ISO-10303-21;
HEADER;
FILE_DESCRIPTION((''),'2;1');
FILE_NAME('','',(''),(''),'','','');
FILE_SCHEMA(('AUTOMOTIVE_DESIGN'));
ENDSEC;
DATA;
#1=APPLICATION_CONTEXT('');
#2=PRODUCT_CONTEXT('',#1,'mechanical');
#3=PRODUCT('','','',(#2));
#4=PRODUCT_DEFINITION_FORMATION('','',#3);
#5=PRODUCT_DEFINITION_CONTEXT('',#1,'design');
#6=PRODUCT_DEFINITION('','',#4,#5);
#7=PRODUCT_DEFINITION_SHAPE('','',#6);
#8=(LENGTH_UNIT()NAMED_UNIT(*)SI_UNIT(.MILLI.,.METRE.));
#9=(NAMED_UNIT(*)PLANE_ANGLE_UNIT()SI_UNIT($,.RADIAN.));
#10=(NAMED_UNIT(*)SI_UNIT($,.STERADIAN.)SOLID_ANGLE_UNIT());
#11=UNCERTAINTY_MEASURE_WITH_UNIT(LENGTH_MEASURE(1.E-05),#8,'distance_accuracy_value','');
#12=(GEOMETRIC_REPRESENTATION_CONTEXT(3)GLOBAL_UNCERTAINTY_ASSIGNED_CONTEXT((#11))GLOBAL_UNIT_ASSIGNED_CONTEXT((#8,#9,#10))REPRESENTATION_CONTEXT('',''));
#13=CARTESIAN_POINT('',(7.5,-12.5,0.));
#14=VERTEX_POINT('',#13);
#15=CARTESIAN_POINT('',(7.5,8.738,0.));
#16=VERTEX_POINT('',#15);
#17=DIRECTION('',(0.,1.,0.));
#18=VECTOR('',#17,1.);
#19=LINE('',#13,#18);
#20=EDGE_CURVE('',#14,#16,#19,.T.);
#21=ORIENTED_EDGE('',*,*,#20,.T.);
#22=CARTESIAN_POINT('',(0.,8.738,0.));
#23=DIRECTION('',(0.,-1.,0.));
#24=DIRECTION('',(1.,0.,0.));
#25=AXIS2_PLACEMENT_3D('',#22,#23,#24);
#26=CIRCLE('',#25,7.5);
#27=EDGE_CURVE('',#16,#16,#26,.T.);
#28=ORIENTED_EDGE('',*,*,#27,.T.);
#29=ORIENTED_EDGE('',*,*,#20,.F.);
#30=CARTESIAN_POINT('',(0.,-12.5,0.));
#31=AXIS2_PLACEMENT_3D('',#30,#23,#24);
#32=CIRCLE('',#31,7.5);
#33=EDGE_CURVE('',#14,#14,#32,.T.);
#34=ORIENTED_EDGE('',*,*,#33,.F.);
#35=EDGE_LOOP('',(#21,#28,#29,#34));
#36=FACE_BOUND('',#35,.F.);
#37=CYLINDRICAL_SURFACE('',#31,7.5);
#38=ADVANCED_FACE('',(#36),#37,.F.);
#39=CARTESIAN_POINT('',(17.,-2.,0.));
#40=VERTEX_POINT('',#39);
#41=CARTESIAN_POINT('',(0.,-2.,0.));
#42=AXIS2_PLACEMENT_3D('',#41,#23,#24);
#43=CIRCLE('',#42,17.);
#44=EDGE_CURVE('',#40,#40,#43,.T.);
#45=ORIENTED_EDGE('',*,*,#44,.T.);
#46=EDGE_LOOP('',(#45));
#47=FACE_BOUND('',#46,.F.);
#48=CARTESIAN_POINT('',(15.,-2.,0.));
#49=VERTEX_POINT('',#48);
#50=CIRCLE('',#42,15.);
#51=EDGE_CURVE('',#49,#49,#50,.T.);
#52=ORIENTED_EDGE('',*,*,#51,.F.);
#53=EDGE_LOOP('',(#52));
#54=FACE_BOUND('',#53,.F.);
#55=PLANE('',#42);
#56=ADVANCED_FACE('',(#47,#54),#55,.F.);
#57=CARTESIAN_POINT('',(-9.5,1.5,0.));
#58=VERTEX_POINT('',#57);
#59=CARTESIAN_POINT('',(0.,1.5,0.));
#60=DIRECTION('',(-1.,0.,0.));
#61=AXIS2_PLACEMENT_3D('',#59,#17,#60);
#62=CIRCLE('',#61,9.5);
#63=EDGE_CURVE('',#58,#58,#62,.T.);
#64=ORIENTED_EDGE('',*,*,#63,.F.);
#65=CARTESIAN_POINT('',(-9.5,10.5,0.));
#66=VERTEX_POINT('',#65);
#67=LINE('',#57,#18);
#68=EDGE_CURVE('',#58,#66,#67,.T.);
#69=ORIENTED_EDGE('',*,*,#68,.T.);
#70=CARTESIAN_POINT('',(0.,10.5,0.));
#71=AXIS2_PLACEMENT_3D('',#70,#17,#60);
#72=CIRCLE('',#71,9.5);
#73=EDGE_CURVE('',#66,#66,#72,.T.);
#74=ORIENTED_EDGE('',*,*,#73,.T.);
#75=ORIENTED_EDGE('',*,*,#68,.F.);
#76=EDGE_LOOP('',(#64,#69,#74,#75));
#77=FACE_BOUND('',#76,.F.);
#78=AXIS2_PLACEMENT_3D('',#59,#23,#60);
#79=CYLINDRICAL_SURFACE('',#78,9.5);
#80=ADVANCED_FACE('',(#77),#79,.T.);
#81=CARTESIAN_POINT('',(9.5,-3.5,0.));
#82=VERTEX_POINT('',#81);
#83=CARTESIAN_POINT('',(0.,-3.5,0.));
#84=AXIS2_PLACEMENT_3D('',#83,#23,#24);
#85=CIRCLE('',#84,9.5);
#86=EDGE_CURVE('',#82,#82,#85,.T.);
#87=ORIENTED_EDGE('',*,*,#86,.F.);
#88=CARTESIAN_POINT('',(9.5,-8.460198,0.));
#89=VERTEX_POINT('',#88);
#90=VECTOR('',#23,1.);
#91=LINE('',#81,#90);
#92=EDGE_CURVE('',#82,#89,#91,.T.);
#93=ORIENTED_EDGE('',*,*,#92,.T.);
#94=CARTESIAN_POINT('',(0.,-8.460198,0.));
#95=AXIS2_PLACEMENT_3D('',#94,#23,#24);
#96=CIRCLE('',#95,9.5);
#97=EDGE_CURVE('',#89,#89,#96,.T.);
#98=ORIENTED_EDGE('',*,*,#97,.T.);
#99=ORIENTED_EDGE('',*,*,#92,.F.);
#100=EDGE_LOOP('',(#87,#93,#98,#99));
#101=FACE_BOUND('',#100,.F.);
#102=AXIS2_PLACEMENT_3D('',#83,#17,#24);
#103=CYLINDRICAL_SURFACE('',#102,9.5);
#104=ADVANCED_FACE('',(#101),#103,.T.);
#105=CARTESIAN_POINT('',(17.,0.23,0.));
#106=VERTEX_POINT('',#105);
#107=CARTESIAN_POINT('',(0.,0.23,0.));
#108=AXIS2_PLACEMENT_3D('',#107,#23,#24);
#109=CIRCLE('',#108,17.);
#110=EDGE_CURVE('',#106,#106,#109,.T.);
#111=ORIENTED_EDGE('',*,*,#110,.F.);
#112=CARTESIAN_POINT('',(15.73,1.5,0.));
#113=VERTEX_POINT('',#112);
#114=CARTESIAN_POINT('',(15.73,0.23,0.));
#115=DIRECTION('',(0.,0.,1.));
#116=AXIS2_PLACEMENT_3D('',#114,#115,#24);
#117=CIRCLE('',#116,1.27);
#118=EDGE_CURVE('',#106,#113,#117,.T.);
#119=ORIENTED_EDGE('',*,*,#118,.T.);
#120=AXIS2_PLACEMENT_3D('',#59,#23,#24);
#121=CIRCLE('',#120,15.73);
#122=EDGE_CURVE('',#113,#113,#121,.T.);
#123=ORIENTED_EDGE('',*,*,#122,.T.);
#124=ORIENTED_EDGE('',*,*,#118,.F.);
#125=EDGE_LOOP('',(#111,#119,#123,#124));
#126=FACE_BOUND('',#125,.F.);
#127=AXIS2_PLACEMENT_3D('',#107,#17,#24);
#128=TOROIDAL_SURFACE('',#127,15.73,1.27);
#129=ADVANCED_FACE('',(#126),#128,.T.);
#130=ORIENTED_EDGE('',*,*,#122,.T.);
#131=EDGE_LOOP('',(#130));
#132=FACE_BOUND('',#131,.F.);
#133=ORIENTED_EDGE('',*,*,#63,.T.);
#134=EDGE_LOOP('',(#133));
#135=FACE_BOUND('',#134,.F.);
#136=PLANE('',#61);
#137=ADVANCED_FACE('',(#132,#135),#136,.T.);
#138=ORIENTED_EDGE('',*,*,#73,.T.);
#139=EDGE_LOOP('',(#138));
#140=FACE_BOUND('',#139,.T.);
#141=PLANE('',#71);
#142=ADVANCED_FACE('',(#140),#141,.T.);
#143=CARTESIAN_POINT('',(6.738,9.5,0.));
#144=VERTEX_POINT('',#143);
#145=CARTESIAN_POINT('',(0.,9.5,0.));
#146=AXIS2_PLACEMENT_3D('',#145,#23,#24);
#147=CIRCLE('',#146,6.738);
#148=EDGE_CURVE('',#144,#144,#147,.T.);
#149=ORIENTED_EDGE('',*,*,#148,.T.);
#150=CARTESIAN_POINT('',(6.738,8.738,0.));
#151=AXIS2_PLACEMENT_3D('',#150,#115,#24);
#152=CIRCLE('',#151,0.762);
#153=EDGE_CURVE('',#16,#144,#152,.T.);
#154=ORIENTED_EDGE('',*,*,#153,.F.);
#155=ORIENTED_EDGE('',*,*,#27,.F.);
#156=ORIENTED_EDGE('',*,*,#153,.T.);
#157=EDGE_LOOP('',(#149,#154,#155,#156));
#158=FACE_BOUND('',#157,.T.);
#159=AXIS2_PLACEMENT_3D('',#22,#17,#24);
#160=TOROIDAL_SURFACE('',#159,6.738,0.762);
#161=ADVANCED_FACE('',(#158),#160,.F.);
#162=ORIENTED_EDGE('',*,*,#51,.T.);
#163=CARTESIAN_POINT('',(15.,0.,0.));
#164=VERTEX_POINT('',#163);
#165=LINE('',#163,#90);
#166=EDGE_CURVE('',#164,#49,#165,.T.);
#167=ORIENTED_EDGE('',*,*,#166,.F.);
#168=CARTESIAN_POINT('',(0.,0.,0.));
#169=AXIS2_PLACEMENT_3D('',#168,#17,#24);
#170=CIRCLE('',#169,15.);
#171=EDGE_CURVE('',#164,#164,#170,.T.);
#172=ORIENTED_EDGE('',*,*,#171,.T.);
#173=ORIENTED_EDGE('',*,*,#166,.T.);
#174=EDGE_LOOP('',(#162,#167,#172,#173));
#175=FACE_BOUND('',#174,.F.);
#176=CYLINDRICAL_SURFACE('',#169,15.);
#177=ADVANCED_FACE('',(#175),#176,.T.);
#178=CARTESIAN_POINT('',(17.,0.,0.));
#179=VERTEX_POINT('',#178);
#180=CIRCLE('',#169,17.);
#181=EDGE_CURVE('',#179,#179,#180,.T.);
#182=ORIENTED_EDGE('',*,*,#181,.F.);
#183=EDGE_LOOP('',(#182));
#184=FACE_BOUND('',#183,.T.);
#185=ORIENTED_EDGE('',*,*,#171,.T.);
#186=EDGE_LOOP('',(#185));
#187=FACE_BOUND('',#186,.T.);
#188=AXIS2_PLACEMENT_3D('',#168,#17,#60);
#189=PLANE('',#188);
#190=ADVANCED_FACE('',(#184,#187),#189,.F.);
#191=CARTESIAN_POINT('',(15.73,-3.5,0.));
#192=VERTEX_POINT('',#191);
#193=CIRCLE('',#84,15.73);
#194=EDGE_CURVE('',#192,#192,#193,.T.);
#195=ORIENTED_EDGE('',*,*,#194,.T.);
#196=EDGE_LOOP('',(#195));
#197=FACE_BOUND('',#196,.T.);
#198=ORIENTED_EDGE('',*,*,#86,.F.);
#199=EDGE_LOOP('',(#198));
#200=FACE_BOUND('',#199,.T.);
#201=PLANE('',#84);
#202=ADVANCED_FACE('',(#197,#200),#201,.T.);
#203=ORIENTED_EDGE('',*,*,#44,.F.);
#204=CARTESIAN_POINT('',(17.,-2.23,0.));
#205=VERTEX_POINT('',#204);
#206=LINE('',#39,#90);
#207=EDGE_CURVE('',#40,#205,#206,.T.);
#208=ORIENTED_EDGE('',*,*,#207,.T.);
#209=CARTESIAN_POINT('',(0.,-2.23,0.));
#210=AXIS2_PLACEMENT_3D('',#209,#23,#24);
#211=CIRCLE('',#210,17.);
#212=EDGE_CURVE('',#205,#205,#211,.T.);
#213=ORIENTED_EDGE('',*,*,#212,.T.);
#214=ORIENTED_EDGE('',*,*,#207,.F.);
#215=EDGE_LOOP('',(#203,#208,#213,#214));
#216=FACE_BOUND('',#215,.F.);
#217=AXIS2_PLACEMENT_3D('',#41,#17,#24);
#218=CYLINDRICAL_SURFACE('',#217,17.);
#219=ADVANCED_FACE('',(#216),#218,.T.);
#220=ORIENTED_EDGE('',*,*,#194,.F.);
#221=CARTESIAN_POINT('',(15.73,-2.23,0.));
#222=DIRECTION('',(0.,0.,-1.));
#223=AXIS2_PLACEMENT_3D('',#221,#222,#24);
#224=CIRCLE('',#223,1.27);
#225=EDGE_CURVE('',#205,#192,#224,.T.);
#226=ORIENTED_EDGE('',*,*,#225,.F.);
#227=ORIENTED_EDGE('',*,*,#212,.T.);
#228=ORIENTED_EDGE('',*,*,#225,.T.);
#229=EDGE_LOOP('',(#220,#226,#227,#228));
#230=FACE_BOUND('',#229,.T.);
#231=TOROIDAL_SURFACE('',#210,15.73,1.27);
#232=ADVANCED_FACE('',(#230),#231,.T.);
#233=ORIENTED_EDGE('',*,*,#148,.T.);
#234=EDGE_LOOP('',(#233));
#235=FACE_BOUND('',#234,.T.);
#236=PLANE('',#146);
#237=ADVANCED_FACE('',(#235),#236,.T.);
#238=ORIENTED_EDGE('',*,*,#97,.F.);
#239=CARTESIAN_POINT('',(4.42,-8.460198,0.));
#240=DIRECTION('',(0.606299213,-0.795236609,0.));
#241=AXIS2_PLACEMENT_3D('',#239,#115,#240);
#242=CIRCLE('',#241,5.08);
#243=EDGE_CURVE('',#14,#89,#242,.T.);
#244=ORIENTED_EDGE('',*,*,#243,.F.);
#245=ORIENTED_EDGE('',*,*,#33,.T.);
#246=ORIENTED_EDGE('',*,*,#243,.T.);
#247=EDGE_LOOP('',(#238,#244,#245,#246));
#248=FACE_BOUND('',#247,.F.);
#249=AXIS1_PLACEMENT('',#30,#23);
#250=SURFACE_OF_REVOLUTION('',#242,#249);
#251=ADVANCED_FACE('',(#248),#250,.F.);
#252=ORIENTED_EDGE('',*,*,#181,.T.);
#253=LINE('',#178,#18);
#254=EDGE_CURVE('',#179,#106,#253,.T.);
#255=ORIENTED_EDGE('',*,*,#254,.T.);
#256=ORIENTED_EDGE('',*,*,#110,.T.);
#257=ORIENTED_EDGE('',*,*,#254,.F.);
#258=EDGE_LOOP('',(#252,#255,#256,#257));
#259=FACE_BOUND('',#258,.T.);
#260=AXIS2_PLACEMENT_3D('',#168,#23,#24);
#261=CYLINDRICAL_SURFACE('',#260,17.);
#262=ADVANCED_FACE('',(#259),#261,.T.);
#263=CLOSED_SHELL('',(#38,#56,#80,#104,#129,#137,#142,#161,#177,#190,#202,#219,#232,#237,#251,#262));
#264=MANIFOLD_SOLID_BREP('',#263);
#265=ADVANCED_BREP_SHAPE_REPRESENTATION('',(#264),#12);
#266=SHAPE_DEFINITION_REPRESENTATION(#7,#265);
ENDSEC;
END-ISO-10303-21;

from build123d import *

# Parameters (mm, degrees)
F0_R      = 15
F1_DEPTH  = 2
F2_R      = 17
F2_R_2    = 15
F3_DEPTH  = 1.5
F4_R      = 17
F4_R_2    = 15
F5_DEPTH  = 1.5
F6_R      = 1.27
F7_R      = 9.5
F8_DEPTH  = 9
F9_R      = 9.5
F10_DEPTH = 9
F11_R     = 7.5
F12_DEPTH = 22
F13_R     = 0.762


# Not quite as in the source:
# - a fillet or chamfer that OpenCascade refuses, or shapes differently, is made with other operations: its cross-section is extruded or revolved along the edge and cut away or added
# - a pattern or mirror of a feature is missing from the dataset's text; its kind, count and spacing are read off the source's solid


with BuildPart() as f1:
    # F0 (on Front) → F1 (new body)
    with BuildSketch(Plane.XZ):
        Circle(F0_R)
    extrude(amount=F1_DEPTH)

    # F2 (on face) → F3 (join)
    with BuildSketch(Plane.XZ.offset(2)):
        Circle(F2_R)
        Circle(F2_R_2, mode=Mode.SUBTRACT)
        Circle(F2_R_2)
    f3 = extrude(amount=F3_DEPTH)

    # F3_copies: F3 across plane
    add(f3.mirror(Plane.ZX.offset(-1)))

    # F4 (on face) → F5 (join)
    with BuildSketch(Plane(origin=(0, 0, 0), x_dir=(-1, 0, 0), z_dir=(0, 1, 0))):
        Circle(F4_R)
        Circle(F4_R_2, mode=Mode.SUBTRACT)
    extrude(amount=F5_DEPTH)

    # F6
    f6_edges = [f1.edges().sort_by_distance(p)[0] for p in [
        (-17, -3.5, 0),
        (-17, 1.5, 0),
    ]]
    fillet(f6_edges, radius=F6_R)

    # F7 (on face) → F8 (join)
    with BuildSketch(Plane.XZ.offset(3.5)):
        Circle(F7_R)
    extrude(amount=F8_DEPTH)

    # F9 (on face) → F10 (join)
    with BuildSketch(Plane(origin=(0, 1.5, 0), x_dir=(-1, 0, 0), z_dir=(0, 1, 0))):
        Circle(F9_R)
    extrude(amount=F10_DEPTH)

    # F11 (on face) → F12 (cut)
    with BuildSketch(Plane.XZ.offset(12.5)):
        Circle(F11_R)
    extrude(amount=-F12_DEPTH, mode=Mode.SUBTRACT)

    # F13
    f13_edges = [f1.edges().sort_by_distance(p)[0] for p in [
        (-7.5, 9.5, 0),
    ]]
    fillet(f13_edges, radius=F13_R)

    # F14: fillet of radius 5.08 on 1 edges, made by hand

    # F14_s1 → F14_t2 (revolve, cut)
    with BuildSketch(Plane.XY):
        with BuildLine():
            ThreePointArc((7.5, -12.5), (8.9726256161, -10.7140835586), (9.5, -8.4601980247))
            Line((9.5, -8.4601980247), (9.5, -12.5))
            Line((9.5, -12.5), (7.5, -12.5))
        make_face()
    revolve(axis=Axis((0, -12.5, 0), (0, -1, 0)), mode=Mode.SUBTRACT)


solid = f1.part
